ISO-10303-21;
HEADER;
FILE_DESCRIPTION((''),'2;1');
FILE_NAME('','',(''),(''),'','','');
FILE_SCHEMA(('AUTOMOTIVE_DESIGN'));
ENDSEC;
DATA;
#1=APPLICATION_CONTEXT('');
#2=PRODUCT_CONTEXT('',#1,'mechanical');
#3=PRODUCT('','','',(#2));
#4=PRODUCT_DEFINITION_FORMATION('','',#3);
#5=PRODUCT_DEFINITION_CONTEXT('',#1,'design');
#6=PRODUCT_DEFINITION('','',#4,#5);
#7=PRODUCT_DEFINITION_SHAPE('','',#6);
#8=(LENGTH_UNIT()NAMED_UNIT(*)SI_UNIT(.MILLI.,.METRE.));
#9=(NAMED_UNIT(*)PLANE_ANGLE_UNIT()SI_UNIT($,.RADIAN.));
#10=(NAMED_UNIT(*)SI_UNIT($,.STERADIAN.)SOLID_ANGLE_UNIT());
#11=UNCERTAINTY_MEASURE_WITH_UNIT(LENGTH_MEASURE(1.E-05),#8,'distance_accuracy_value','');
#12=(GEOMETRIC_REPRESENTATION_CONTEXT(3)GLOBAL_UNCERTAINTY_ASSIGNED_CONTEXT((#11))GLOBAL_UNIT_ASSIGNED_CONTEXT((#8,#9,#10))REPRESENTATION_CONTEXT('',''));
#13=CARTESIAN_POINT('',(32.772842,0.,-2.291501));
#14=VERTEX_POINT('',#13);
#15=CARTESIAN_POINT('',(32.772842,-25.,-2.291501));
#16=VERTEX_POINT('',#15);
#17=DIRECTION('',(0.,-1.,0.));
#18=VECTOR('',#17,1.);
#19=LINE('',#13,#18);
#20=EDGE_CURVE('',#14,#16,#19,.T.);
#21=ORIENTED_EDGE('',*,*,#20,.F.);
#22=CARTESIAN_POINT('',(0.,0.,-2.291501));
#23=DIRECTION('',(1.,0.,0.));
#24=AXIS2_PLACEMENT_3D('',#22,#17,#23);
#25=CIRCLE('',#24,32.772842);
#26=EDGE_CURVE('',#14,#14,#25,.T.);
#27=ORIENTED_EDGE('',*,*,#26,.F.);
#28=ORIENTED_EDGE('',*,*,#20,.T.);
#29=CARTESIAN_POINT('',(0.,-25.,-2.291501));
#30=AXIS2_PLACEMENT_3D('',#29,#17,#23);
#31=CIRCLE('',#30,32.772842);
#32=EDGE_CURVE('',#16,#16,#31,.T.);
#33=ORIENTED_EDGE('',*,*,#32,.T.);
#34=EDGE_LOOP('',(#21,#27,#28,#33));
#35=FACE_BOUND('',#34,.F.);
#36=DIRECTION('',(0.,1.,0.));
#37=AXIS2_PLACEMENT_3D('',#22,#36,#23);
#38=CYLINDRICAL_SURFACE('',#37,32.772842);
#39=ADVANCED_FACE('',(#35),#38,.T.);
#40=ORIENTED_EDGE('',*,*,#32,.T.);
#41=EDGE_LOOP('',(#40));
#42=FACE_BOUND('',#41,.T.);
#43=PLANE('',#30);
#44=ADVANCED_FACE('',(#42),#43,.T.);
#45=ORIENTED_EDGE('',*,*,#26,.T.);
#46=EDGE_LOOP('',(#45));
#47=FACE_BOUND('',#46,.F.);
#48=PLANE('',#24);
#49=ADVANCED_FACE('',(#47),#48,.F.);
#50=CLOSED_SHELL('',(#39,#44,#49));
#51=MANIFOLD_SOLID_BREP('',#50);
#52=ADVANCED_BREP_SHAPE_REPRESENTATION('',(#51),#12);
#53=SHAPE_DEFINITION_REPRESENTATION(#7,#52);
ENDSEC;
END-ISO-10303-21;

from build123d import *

# Parameters (mm, degrees)
F0_R     = 32.7728421293
F1_DEPTH = 25
F4_R     = 2.5240293439
F5_DEPTH = 25


# Not quite as in the source:
# - the program builds the solid bodies; features that only make, move or delete a surface that nothing else refers to are left out


with BuildPart() as f1:
    # F0 (on Front) → F1 (new body)
    with BuildSketch(Plane.XZ):
        with Locations((0, -2.2915014997)):
            Circle(F0_R)
    extrude(amount=F1_DEPTH)

    # F4 (on Front) → F5 (join)
    with BuildSketch(Plane.XZ):
        with Locations((0, -2.3574866354)):
            Circle(F4_R)
    extrude(amount=F5_DEPTH)


solid = f1.part
